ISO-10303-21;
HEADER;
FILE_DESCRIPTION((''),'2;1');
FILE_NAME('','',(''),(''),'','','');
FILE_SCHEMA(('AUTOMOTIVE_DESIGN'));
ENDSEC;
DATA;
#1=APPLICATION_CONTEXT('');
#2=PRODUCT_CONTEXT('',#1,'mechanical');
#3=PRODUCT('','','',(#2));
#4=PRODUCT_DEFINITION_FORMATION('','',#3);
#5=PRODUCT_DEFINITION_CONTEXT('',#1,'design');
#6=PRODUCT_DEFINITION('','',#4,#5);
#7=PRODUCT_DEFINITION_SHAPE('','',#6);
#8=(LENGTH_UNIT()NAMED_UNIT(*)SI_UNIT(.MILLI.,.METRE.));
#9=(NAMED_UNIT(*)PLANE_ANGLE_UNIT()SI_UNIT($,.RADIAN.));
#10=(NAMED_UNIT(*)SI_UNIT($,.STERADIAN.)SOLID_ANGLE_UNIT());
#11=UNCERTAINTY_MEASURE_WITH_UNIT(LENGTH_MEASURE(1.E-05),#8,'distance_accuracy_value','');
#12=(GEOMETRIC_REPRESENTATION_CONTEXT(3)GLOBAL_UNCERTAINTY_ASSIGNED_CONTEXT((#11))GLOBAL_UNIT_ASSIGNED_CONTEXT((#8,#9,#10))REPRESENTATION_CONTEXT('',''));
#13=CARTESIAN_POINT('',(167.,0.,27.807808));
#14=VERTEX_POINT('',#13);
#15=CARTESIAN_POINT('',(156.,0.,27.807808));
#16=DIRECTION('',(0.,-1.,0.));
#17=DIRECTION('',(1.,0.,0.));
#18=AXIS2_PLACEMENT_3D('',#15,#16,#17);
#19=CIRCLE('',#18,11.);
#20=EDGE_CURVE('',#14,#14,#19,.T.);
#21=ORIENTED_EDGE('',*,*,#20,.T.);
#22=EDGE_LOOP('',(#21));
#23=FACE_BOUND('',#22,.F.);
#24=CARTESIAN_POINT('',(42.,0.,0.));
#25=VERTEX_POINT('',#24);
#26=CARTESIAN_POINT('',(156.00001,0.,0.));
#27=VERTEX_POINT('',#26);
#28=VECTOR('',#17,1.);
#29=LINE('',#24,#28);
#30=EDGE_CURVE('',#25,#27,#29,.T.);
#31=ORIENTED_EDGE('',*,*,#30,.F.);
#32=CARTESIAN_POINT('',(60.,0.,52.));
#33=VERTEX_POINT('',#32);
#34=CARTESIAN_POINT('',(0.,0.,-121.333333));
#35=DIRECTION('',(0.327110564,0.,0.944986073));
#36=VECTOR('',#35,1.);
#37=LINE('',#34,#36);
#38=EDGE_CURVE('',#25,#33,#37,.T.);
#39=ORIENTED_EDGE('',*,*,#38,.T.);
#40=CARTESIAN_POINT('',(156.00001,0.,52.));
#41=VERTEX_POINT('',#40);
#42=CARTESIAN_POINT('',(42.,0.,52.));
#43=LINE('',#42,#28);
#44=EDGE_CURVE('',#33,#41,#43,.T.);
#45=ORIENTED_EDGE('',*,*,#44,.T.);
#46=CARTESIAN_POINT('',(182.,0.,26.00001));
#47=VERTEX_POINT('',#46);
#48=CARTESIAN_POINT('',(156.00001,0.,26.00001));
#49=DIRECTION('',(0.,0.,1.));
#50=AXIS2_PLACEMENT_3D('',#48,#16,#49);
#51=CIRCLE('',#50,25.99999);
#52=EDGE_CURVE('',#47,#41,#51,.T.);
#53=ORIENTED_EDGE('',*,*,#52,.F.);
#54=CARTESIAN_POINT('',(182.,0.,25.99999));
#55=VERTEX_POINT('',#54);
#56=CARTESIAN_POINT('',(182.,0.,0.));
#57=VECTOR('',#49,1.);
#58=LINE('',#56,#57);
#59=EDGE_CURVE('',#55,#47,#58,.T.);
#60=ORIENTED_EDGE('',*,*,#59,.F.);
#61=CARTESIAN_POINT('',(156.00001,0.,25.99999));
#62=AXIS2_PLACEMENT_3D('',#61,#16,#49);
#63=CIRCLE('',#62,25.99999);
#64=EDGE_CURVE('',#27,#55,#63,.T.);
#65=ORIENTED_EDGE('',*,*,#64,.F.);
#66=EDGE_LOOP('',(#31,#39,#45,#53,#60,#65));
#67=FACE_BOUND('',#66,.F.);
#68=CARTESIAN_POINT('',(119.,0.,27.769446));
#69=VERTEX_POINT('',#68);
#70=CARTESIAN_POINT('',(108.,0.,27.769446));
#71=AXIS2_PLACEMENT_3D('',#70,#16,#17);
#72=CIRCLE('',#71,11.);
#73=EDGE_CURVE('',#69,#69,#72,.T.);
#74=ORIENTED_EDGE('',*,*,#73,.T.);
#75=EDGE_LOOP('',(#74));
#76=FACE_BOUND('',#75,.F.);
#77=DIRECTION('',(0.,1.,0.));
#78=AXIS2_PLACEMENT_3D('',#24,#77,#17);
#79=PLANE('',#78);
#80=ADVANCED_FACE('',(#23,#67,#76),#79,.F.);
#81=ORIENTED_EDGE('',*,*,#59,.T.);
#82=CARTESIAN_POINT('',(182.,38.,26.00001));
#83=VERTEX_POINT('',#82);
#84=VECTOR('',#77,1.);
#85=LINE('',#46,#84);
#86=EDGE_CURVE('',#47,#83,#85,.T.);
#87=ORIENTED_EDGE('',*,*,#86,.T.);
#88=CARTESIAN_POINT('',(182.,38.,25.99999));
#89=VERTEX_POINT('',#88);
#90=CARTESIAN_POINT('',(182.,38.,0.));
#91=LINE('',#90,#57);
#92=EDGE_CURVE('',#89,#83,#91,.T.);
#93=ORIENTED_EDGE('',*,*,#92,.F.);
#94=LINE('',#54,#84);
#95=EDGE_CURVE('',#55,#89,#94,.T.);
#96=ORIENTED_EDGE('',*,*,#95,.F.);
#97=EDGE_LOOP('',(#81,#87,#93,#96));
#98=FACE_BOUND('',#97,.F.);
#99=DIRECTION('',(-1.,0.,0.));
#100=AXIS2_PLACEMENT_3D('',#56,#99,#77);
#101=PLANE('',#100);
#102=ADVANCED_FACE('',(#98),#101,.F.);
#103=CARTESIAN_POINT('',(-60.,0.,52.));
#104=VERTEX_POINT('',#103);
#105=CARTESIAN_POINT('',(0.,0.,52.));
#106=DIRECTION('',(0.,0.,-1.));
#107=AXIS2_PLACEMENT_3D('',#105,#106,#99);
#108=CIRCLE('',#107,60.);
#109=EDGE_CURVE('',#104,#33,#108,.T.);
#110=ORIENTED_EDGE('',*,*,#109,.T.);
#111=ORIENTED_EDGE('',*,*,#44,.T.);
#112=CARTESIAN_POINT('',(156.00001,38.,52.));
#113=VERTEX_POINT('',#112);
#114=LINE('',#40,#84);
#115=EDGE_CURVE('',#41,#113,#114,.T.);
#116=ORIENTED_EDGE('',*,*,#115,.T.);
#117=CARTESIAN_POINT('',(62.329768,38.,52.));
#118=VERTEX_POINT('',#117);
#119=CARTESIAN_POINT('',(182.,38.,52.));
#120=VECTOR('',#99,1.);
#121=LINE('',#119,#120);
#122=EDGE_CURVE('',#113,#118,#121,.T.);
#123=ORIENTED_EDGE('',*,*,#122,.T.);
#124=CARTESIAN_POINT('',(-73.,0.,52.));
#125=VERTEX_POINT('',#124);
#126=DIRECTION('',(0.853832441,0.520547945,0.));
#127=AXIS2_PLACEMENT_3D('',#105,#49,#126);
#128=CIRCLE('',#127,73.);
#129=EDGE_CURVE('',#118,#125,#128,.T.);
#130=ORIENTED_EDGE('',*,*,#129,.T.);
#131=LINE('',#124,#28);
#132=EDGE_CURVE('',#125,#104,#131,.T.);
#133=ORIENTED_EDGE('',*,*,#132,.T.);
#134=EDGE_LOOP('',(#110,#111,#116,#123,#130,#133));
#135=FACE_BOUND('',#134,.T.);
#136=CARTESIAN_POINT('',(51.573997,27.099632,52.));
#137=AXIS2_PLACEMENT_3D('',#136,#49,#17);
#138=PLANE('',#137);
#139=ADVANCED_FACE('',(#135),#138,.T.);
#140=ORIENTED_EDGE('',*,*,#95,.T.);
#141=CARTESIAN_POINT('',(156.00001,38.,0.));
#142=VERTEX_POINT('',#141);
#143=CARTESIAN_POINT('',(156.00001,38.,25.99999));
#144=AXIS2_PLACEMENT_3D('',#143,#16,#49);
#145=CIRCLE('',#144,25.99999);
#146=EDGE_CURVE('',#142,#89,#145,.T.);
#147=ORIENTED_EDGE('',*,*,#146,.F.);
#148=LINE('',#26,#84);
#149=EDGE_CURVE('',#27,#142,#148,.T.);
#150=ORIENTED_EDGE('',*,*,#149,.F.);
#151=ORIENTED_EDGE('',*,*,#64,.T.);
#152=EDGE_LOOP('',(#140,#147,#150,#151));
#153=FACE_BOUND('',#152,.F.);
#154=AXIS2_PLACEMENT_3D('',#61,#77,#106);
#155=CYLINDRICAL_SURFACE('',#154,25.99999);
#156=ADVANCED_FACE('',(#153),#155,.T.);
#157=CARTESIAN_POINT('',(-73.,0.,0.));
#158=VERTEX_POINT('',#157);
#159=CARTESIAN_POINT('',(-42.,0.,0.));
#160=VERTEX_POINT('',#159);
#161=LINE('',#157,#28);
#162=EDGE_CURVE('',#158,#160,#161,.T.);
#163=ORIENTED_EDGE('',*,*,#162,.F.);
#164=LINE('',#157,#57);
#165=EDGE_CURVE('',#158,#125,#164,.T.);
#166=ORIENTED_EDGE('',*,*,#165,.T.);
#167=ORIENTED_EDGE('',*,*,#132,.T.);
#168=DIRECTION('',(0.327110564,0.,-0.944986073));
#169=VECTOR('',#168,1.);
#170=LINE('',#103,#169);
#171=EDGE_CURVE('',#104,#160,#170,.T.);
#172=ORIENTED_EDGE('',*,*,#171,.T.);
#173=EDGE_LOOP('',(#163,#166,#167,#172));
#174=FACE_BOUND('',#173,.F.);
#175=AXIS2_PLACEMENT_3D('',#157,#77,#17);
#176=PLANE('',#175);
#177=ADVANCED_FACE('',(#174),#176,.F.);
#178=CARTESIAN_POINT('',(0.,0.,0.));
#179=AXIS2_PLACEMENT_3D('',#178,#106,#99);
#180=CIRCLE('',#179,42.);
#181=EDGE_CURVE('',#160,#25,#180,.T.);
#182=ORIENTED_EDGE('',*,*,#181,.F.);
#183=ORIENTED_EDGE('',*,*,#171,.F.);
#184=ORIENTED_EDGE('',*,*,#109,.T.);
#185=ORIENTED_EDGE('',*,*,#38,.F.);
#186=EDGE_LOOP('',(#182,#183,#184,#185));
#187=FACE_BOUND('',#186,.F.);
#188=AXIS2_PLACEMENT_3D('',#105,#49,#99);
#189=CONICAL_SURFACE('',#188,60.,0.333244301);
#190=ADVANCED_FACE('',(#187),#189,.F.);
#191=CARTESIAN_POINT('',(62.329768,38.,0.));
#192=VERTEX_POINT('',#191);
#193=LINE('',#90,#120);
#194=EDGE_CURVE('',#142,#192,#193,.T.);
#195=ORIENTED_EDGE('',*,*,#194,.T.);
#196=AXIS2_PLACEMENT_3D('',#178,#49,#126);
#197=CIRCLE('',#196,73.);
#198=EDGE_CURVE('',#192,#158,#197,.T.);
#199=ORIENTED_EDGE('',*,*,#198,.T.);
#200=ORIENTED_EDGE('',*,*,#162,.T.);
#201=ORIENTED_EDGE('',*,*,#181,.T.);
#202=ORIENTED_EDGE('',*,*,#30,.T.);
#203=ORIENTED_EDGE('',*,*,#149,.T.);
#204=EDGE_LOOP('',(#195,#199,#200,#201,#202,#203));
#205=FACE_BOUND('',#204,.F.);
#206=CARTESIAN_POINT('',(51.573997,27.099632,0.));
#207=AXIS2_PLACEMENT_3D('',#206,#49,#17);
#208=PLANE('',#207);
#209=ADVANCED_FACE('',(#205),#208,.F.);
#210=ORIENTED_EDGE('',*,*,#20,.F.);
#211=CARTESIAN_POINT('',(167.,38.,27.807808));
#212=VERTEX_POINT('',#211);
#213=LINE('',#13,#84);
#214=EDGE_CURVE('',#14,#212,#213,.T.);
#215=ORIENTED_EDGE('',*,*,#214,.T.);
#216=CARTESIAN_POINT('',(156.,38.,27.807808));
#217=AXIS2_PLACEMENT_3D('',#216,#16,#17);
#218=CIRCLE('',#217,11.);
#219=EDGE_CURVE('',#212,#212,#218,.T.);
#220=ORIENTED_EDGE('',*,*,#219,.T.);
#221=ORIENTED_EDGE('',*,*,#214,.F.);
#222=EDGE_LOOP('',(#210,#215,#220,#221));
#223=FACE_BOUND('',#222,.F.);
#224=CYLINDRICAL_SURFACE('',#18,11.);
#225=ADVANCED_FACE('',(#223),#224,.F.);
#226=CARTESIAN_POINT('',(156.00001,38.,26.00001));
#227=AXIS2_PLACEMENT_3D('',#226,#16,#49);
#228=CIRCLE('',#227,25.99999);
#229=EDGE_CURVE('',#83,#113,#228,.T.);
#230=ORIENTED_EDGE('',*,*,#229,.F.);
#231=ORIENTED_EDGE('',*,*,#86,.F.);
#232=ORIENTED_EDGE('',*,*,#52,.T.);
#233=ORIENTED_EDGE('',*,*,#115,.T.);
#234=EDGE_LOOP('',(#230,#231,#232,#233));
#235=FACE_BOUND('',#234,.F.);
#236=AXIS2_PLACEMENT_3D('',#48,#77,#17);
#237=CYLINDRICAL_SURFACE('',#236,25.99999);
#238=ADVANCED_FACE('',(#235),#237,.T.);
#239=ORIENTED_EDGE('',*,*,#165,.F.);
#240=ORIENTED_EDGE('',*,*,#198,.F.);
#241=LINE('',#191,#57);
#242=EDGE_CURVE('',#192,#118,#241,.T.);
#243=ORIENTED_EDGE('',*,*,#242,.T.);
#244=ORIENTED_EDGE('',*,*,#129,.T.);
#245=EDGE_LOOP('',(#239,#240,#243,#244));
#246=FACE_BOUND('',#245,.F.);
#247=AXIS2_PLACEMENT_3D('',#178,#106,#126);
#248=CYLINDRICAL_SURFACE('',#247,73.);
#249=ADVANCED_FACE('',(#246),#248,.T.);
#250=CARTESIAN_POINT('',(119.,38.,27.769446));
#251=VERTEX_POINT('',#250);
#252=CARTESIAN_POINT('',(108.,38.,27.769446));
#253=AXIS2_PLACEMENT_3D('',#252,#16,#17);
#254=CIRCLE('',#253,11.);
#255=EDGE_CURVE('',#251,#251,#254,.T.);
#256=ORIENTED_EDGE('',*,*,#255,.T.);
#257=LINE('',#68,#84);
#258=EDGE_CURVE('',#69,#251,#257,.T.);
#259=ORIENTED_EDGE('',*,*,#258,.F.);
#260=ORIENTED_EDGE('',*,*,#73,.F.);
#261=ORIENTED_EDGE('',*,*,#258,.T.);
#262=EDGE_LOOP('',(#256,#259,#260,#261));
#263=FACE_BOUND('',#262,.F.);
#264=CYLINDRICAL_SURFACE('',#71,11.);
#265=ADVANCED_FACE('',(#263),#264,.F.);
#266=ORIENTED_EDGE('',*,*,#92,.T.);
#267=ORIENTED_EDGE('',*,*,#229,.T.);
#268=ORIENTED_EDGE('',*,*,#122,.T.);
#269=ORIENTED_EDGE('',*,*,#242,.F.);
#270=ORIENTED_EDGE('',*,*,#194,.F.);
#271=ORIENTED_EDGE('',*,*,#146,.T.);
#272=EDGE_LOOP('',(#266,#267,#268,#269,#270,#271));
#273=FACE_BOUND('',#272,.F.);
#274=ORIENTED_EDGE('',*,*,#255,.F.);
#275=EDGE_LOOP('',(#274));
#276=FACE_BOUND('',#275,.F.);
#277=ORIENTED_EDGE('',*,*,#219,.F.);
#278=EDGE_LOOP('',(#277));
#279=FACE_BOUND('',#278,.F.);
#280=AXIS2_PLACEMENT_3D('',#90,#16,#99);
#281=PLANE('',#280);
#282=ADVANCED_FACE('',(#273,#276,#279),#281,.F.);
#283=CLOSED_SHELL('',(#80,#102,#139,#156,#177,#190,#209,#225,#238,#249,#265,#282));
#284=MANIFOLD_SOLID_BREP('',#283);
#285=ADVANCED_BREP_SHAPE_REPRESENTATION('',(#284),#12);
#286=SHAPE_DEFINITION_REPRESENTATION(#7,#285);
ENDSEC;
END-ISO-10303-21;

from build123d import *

# Parameters (mm, degrees)
F1_DEPTH = 52
F4_R     = 11
F5_DEPTH = 154
F6_R     = 25.99999


# Not quite as in the source:
# - a fillet or chamfer is up to 0.001 mm smaller than in the source, because OpenCascade refuses the exact size


with BuildPart() as f1:
    # F0 (on Top) → F1 (new body)
    with BuildSketch(Plane.XY):
        with BuildLine():
            ThreePointArc((-42, 0), (0, 42), (42, 0))
            Line((42, 0), (73, 0))
            Line((73, 0), (182, 0))
            Line((182, 0), (182, 38))
            Line((182, 38), (62.329768169, 38))
            ThreePointArc((62.329768169, 38), (-19.7348286497, 70.2818364741), (-73, 0))
            Line((-73, 0), (-42, 0))
        make_face()
    extrude(amount=F1_DEPTH)

    # F2 (on face) → F3 (revolve, cut)
    with BuildSketch(Plane.XZ):
        Polygon((-42, 52), (-60, 52), (-42, 0), align=None)
    revolve(axis=Axis((0, 0, 25.9652175009), (0, 0, -1)), mode=Mode.SUBTRACT)

    # F4 (on face) → F5 (cut)
    with BuildSketch(Plane.XZ):
        with Locations((108, 27.769446373)):
            Circle(F4_R)
        with Locations((156, 27.8078082746)):
            Circle(F4_R)
    extrude(amount=-F5_DEPTH, mode=Mode.SUBTRACT)

    # F6 (radius 26 in the source; OpenCascade refuses exactly that, so slightly less here)
    f6_edges = [f1.edges().sort_by_distance(p)[0] for p in [
        (182, 19, 52),
        (182, 19, 0),
    ]]
    fillet(f6_edges, radius=F6_R)


solid = f1.part
